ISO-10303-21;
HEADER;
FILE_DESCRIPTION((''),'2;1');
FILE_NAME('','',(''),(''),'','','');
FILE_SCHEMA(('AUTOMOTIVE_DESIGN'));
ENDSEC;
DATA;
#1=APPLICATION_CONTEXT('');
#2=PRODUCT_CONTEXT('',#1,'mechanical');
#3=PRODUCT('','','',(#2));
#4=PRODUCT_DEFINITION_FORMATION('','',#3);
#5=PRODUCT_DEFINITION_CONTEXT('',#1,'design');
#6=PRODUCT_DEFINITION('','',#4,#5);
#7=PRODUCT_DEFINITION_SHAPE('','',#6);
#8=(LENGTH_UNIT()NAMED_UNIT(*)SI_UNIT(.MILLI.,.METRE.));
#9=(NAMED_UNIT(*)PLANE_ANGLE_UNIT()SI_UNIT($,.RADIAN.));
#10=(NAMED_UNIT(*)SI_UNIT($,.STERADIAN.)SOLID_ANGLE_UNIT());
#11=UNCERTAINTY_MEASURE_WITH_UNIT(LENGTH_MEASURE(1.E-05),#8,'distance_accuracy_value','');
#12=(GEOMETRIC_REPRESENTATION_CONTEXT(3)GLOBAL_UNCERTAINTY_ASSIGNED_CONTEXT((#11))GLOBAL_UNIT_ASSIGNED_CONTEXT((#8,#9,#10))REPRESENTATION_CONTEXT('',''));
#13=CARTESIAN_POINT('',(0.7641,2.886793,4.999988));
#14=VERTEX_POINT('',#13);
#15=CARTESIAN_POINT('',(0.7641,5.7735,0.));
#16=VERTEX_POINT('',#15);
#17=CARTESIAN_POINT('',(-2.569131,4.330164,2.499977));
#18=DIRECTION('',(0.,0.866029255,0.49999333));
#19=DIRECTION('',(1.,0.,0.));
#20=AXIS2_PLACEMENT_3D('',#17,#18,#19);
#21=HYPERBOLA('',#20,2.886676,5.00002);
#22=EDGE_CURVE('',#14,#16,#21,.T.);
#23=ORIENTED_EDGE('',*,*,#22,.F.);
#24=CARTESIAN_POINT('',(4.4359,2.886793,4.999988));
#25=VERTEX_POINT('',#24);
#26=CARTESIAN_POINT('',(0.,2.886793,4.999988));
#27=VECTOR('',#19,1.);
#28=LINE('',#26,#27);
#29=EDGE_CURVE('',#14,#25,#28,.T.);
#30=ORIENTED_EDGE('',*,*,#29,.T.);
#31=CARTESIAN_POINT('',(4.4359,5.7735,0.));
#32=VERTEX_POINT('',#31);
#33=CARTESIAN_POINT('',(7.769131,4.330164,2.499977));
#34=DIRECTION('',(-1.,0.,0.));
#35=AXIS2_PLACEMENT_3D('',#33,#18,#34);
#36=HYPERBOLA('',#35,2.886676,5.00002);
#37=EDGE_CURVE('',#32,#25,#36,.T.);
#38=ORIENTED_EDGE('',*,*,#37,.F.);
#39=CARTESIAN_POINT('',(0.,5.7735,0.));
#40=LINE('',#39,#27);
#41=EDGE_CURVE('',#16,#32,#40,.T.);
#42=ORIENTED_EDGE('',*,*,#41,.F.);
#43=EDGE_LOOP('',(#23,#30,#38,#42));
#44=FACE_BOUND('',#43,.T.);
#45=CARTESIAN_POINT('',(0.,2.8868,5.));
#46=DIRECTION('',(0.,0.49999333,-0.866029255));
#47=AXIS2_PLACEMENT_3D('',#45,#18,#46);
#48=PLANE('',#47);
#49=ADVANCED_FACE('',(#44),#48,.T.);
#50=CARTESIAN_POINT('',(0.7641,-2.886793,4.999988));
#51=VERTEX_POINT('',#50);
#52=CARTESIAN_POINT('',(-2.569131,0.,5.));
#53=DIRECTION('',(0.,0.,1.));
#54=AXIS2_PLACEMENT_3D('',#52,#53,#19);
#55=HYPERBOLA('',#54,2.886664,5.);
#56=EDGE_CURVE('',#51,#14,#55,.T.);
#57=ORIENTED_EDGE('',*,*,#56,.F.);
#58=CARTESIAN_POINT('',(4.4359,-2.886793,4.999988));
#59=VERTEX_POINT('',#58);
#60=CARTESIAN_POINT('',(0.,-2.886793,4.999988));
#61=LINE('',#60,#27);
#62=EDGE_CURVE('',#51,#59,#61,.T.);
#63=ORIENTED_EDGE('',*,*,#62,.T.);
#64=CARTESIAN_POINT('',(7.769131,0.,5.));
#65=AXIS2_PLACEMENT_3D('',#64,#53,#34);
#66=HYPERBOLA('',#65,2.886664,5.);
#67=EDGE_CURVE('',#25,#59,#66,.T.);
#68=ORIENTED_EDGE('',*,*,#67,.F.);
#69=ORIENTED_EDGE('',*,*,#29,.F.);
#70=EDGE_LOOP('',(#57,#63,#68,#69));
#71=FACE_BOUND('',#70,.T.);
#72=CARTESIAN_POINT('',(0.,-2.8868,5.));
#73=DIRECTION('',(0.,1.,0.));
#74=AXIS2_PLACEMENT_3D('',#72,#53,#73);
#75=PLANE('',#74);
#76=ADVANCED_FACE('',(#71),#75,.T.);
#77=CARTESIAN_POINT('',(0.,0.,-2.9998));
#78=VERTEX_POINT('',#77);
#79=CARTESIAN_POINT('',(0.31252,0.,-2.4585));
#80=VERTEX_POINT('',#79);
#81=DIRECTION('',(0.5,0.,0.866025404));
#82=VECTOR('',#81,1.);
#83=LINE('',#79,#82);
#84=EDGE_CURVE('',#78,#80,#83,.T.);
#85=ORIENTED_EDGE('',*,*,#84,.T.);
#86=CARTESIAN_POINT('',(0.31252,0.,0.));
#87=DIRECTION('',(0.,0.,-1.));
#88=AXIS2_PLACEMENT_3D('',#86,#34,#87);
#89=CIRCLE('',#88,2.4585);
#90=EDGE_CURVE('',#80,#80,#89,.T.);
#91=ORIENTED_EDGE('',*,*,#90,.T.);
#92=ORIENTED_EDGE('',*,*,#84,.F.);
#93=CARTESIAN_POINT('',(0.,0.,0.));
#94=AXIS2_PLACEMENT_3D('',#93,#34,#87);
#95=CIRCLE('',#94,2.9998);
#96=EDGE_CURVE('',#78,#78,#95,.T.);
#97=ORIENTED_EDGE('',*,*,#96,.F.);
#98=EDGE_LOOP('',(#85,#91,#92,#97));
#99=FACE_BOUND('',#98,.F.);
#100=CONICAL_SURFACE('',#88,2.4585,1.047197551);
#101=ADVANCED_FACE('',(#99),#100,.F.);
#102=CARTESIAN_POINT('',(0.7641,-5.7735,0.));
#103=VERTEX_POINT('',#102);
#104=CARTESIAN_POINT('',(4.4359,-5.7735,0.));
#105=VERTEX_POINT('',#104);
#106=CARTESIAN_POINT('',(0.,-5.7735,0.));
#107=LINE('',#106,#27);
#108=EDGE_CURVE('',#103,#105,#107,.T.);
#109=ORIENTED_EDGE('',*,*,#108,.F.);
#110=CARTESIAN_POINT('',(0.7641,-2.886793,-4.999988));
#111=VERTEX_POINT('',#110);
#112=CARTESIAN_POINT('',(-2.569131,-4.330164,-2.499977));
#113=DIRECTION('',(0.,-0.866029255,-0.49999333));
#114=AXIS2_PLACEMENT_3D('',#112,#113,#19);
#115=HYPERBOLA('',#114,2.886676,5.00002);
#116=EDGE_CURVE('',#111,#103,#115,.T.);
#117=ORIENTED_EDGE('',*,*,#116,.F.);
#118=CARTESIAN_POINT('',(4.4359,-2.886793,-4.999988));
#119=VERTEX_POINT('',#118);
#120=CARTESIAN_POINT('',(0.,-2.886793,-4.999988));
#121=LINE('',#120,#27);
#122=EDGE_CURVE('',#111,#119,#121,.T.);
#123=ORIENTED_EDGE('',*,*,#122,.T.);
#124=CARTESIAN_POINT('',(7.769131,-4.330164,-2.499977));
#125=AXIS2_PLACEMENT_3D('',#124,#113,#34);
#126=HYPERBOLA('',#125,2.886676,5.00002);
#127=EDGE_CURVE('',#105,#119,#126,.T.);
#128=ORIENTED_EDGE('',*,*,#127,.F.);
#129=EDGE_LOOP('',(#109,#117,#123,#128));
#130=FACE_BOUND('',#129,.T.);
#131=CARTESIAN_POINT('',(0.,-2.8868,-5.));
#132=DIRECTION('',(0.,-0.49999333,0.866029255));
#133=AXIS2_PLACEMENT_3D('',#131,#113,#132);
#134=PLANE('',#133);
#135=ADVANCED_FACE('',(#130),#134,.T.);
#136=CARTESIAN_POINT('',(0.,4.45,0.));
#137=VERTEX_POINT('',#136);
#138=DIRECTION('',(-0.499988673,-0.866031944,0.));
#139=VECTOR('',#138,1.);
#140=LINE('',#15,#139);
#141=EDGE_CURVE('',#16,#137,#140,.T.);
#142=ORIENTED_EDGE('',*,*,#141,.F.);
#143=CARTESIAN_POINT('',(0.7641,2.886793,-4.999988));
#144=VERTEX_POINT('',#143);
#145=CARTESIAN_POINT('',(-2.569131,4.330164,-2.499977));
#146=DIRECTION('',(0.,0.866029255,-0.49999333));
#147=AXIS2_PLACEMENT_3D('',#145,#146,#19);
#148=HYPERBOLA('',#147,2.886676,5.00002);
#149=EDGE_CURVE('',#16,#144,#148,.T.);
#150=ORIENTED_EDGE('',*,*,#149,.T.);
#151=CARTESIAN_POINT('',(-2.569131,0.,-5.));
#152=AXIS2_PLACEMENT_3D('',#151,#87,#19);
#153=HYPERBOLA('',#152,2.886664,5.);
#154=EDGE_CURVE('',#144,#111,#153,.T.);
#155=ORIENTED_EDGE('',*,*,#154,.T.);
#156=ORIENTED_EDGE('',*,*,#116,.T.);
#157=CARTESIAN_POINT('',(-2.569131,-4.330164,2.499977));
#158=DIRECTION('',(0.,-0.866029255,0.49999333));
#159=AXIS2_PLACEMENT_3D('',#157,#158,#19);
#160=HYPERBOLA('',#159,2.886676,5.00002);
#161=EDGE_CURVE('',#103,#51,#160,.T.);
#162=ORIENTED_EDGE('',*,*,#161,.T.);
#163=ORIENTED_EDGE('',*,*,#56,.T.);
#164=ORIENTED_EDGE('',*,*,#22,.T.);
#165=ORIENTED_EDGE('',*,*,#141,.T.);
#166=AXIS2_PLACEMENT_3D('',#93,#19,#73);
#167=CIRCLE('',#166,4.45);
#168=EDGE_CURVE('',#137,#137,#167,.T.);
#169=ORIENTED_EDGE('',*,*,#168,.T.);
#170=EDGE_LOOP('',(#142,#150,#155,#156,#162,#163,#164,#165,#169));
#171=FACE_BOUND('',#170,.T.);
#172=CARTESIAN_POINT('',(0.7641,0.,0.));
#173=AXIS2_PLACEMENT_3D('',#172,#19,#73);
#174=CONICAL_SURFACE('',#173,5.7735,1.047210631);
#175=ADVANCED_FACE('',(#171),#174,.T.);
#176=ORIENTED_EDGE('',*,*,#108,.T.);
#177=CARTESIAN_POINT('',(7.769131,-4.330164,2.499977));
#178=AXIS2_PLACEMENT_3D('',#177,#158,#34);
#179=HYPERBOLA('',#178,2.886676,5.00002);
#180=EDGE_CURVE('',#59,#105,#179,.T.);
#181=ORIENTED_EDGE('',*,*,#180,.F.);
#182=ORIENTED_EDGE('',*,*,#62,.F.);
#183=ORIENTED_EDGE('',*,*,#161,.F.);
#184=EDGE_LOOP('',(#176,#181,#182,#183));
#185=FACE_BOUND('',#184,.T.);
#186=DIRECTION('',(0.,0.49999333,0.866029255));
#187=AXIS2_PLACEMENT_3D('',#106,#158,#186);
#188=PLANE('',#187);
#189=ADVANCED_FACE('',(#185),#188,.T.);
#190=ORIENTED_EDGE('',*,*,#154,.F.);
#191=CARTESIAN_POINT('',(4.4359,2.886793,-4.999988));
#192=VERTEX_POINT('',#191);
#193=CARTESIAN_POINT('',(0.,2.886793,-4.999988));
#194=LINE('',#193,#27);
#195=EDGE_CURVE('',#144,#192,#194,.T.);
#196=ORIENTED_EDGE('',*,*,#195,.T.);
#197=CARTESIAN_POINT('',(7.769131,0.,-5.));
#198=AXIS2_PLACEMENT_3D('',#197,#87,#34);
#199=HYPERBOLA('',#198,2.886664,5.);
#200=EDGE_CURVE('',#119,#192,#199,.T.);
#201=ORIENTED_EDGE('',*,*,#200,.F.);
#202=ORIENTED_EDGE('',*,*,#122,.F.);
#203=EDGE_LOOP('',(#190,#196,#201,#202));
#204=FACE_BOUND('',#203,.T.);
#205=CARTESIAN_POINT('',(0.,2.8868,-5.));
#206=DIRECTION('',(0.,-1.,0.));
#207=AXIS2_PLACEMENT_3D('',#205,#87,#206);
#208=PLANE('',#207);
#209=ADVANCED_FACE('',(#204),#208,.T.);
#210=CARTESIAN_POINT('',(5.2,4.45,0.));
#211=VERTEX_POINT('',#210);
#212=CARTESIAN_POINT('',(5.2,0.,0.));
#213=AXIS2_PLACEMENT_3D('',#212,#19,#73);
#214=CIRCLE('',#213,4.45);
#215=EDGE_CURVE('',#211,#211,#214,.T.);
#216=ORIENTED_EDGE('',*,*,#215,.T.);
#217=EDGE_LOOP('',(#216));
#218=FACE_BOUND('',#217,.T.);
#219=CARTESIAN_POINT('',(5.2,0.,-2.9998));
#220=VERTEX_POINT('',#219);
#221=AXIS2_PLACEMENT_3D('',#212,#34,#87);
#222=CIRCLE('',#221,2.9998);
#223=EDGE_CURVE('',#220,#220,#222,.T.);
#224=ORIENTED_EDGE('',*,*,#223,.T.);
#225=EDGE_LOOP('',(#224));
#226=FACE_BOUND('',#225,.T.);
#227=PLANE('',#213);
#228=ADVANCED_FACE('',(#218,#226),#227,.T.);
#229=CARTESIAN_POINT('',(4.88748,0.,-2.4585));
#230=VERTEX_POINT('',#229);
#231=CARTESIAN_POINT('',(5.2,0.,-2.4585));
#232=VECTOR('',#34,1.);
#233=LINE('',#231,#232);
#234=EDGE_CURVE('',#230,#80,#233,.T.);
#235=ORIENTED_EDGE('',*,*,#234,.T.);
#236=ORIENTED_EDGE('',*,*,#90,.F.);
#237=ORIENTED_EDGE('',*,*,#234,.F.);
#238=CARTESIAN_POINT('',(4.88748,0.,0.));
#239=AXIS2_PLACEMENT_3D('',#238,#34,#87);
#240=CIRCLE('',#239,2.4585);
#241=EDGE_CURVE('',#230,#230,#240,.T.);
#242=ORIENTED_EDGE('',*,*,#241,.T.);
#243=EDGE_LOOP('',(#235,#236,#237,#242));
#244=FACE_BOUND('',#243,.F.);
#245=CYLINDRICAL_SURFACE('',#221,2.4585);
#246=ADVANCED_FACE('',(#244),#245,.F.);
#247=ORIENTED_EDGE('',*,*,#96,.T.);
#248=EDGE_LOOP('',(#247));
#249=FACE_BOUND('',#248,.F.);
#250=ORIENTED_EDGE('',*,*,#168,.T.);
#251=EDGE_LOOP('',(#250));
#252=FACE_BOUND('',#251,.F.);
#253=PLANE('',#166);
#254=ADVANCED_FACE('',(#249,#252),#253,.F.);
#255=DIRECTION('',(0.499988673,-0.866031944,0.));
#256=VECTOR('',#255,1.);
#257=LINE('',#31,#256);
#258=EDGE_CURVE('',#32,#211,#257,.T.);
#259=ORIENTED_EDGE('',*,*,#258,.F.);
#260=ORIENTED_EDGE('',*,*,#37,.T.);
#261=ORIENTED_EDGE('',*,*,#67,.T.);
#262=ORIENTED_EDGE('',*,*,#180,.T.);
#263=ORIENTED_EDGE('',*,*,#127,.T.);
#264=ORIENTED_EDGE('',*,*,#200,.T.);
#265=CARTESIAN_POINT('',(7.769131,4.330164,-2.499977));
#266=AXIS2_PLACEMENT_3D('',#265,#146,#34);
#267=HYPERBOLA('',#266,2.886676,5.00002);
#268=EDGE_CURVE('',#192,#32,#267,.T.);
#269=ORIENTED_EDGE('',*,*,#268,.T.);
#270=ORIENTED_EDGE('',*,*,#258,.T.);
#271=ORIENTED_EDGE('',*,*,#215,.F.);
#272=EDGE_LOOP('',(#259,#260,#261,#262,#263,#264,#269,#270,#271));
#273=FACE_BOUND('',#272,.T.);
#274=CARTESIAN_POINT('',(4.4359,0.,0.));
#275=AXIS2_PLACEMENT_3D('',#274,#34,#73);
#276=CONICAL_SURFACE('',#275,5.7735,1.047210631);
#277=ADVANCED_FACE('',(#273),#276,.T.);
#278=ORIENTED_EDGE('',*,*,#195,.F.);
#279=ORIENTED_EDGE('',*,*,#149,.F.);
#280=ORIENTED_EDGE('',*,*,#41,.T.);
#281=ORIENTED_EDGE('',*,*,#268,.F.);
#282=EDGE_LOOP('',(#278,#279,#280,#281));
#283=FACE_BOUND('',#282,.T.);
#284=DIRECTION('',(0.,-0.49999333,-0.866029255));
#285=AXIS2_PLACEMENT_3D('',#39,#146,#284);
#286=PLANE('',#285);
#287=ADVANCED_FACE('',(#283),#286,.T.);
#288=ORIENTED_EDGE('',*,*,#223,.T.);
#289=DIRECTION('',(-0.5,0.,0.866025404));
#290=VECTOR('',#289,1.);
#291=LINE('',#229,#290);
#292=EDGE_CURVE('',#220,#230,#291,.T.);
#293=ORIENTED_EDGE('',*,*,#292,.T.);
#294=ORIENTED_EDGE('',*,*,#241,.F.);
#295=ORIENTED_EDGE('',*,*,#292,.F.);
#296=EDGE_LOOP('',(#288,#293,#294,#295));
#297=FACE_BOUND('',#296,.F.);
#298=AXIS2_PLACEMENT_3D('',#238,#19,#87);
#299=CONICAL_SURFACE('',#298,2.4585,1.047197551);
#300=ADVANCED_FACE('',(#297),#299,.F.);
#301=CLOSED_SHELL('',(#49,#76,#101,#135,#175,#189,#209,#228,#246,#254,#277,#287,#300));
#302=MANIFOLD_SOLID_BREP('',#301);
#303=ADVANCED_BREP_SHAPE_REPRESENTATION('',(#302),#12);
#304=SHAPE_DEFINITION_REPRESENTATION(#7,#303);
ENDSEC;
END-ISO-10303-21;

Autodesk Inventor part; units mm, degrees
ref_plane "YZ Plane" through (0, 0, 0) normal (1, 0, 0) x (0, 1, 0)
ref_plane "XZ Plane" through (0, 0, 0) normal (0, 1, 0) x (-1, 0, 0)
sketch "Sketch1" plane through (0, 0, 0) normal (1, 0, 0) x (0, 1, 0)
  line L0 (-5.7735, 0) -> (-2.8868, 5)
  line L1 (-2.8868, 5) -> (2.8868, 5)
  line L2 (2.8868, 5) -> (5.7735, 0)
  line L3 (5.7735, 0) -> (2.8868, -5)
  line L4 (2.8868, -5) -> (-2.8868, -5)
  line L5 (-2.8868, -5) -> (-5.7735, 0)
  point P0 (0, 0)
  point P1 (0, 0)
  dimension "d0" = 11.547
extrude "Body" add sketch "Sketch1" along normal blind 5.2
sketch "Sketch2" plane through (0, 0, 0) normal (0, 0, 1) x (1, 0, 0)
  line L0 (0, 2.8868) -> (0, 5.7735) projected
  line L1 (0, 5.7735) -> (5.2, 5.7735) projected
  line L2 (5.2, 2.8868) -> (5.2, 5.7735) projected
  line L3 (-1.04, 0) -> (6.24, 0) projected
  line L4 (0.7641, 5.7735) -> (0, 4.45)
  line L5 (4.4359, 5.7735) -> (5.2, 4.45)
  dimension "d3" = 30
  dimension "d4" = 30
  dimension "d5" = 8.9
  dimension "d6" = 8.9
revolve "Chamfer1" cut sketch "Sketch2" angle 360 about axis through (-10, 0, 0) along (1, 0, 0)
sketch "Sketch3" plane through (5.2, 0, 0) normal (1, 0, 0) x (0, 0, -1)
  arc A0 (-0.625, -1.0825) -> (0.625, -1.0825) centre (0, 0) ccw projected
hole "Thread" at (5.2, 0, 0) direction (-1, 0, 0) diameter 4.917 end through all thread size "M6x1" class "6H" standard "ISO Metric profile"
chamfer "Chamfer2" distance 0.5413 angle 30 1 edges at (5.2, 0, 2.4585) measured on face at (5.2, 3.7371, -0.4538)
chamfer "Chamfer3" distance 0.5413 angle 30 1 edges at (0, 0, 2.4585) measured on face at (0, 3.7371, -0.4538)
ref_plane "Work Plane1" through (-10.9812, 0, 0) normal (0, -0.8660254, -0.5) x (1, 0, 0)
equation "\"d0\" = 1.1547 * SW"
equation "\"d1\" = KOH"
equation "\"d3\" = ANG1"
equation "\"d4\" = ANG2"
equation "\"d5\" = SW0"
equation "\"d6\" = SW01"
equation "\"d8\" = -0.5 * GD1 + 0.5 * NND"
equation "\"d40\" = -0.5 * GD1 + 0.5 * NND"
equation "\"d10\" = -0.5 * GD1 + 0.5 * NND"
equation "\"d41\" = -0.5 * GD1 + 0.5 * NND"
equation "\"ANG1\" = 30deg"
equation "\"ANG2\" = 30deg"
equation "\"NND\" = 6"
equation "\"KOH\" = 5.2"
equation "\"SW0\" = 8.9"
equation "\"SW01\" = SW0"
equation "\"GUL\" = 0.541266 * PTC"
equation "\"THREADDIA\" = 6"
equation "\"TOA\" = 30deg"
equation "\"PTC\" = 1"
equation "\"E0\" = 1.155 * SW"
equation "\"GAL\" = 0.541266 * PTC"
equation "\"SW\" = 10"
equation "\"GD1\" = 4.917468"
properties part number "ISO 4032 - M6" material "Stainless Steel, 440C"
